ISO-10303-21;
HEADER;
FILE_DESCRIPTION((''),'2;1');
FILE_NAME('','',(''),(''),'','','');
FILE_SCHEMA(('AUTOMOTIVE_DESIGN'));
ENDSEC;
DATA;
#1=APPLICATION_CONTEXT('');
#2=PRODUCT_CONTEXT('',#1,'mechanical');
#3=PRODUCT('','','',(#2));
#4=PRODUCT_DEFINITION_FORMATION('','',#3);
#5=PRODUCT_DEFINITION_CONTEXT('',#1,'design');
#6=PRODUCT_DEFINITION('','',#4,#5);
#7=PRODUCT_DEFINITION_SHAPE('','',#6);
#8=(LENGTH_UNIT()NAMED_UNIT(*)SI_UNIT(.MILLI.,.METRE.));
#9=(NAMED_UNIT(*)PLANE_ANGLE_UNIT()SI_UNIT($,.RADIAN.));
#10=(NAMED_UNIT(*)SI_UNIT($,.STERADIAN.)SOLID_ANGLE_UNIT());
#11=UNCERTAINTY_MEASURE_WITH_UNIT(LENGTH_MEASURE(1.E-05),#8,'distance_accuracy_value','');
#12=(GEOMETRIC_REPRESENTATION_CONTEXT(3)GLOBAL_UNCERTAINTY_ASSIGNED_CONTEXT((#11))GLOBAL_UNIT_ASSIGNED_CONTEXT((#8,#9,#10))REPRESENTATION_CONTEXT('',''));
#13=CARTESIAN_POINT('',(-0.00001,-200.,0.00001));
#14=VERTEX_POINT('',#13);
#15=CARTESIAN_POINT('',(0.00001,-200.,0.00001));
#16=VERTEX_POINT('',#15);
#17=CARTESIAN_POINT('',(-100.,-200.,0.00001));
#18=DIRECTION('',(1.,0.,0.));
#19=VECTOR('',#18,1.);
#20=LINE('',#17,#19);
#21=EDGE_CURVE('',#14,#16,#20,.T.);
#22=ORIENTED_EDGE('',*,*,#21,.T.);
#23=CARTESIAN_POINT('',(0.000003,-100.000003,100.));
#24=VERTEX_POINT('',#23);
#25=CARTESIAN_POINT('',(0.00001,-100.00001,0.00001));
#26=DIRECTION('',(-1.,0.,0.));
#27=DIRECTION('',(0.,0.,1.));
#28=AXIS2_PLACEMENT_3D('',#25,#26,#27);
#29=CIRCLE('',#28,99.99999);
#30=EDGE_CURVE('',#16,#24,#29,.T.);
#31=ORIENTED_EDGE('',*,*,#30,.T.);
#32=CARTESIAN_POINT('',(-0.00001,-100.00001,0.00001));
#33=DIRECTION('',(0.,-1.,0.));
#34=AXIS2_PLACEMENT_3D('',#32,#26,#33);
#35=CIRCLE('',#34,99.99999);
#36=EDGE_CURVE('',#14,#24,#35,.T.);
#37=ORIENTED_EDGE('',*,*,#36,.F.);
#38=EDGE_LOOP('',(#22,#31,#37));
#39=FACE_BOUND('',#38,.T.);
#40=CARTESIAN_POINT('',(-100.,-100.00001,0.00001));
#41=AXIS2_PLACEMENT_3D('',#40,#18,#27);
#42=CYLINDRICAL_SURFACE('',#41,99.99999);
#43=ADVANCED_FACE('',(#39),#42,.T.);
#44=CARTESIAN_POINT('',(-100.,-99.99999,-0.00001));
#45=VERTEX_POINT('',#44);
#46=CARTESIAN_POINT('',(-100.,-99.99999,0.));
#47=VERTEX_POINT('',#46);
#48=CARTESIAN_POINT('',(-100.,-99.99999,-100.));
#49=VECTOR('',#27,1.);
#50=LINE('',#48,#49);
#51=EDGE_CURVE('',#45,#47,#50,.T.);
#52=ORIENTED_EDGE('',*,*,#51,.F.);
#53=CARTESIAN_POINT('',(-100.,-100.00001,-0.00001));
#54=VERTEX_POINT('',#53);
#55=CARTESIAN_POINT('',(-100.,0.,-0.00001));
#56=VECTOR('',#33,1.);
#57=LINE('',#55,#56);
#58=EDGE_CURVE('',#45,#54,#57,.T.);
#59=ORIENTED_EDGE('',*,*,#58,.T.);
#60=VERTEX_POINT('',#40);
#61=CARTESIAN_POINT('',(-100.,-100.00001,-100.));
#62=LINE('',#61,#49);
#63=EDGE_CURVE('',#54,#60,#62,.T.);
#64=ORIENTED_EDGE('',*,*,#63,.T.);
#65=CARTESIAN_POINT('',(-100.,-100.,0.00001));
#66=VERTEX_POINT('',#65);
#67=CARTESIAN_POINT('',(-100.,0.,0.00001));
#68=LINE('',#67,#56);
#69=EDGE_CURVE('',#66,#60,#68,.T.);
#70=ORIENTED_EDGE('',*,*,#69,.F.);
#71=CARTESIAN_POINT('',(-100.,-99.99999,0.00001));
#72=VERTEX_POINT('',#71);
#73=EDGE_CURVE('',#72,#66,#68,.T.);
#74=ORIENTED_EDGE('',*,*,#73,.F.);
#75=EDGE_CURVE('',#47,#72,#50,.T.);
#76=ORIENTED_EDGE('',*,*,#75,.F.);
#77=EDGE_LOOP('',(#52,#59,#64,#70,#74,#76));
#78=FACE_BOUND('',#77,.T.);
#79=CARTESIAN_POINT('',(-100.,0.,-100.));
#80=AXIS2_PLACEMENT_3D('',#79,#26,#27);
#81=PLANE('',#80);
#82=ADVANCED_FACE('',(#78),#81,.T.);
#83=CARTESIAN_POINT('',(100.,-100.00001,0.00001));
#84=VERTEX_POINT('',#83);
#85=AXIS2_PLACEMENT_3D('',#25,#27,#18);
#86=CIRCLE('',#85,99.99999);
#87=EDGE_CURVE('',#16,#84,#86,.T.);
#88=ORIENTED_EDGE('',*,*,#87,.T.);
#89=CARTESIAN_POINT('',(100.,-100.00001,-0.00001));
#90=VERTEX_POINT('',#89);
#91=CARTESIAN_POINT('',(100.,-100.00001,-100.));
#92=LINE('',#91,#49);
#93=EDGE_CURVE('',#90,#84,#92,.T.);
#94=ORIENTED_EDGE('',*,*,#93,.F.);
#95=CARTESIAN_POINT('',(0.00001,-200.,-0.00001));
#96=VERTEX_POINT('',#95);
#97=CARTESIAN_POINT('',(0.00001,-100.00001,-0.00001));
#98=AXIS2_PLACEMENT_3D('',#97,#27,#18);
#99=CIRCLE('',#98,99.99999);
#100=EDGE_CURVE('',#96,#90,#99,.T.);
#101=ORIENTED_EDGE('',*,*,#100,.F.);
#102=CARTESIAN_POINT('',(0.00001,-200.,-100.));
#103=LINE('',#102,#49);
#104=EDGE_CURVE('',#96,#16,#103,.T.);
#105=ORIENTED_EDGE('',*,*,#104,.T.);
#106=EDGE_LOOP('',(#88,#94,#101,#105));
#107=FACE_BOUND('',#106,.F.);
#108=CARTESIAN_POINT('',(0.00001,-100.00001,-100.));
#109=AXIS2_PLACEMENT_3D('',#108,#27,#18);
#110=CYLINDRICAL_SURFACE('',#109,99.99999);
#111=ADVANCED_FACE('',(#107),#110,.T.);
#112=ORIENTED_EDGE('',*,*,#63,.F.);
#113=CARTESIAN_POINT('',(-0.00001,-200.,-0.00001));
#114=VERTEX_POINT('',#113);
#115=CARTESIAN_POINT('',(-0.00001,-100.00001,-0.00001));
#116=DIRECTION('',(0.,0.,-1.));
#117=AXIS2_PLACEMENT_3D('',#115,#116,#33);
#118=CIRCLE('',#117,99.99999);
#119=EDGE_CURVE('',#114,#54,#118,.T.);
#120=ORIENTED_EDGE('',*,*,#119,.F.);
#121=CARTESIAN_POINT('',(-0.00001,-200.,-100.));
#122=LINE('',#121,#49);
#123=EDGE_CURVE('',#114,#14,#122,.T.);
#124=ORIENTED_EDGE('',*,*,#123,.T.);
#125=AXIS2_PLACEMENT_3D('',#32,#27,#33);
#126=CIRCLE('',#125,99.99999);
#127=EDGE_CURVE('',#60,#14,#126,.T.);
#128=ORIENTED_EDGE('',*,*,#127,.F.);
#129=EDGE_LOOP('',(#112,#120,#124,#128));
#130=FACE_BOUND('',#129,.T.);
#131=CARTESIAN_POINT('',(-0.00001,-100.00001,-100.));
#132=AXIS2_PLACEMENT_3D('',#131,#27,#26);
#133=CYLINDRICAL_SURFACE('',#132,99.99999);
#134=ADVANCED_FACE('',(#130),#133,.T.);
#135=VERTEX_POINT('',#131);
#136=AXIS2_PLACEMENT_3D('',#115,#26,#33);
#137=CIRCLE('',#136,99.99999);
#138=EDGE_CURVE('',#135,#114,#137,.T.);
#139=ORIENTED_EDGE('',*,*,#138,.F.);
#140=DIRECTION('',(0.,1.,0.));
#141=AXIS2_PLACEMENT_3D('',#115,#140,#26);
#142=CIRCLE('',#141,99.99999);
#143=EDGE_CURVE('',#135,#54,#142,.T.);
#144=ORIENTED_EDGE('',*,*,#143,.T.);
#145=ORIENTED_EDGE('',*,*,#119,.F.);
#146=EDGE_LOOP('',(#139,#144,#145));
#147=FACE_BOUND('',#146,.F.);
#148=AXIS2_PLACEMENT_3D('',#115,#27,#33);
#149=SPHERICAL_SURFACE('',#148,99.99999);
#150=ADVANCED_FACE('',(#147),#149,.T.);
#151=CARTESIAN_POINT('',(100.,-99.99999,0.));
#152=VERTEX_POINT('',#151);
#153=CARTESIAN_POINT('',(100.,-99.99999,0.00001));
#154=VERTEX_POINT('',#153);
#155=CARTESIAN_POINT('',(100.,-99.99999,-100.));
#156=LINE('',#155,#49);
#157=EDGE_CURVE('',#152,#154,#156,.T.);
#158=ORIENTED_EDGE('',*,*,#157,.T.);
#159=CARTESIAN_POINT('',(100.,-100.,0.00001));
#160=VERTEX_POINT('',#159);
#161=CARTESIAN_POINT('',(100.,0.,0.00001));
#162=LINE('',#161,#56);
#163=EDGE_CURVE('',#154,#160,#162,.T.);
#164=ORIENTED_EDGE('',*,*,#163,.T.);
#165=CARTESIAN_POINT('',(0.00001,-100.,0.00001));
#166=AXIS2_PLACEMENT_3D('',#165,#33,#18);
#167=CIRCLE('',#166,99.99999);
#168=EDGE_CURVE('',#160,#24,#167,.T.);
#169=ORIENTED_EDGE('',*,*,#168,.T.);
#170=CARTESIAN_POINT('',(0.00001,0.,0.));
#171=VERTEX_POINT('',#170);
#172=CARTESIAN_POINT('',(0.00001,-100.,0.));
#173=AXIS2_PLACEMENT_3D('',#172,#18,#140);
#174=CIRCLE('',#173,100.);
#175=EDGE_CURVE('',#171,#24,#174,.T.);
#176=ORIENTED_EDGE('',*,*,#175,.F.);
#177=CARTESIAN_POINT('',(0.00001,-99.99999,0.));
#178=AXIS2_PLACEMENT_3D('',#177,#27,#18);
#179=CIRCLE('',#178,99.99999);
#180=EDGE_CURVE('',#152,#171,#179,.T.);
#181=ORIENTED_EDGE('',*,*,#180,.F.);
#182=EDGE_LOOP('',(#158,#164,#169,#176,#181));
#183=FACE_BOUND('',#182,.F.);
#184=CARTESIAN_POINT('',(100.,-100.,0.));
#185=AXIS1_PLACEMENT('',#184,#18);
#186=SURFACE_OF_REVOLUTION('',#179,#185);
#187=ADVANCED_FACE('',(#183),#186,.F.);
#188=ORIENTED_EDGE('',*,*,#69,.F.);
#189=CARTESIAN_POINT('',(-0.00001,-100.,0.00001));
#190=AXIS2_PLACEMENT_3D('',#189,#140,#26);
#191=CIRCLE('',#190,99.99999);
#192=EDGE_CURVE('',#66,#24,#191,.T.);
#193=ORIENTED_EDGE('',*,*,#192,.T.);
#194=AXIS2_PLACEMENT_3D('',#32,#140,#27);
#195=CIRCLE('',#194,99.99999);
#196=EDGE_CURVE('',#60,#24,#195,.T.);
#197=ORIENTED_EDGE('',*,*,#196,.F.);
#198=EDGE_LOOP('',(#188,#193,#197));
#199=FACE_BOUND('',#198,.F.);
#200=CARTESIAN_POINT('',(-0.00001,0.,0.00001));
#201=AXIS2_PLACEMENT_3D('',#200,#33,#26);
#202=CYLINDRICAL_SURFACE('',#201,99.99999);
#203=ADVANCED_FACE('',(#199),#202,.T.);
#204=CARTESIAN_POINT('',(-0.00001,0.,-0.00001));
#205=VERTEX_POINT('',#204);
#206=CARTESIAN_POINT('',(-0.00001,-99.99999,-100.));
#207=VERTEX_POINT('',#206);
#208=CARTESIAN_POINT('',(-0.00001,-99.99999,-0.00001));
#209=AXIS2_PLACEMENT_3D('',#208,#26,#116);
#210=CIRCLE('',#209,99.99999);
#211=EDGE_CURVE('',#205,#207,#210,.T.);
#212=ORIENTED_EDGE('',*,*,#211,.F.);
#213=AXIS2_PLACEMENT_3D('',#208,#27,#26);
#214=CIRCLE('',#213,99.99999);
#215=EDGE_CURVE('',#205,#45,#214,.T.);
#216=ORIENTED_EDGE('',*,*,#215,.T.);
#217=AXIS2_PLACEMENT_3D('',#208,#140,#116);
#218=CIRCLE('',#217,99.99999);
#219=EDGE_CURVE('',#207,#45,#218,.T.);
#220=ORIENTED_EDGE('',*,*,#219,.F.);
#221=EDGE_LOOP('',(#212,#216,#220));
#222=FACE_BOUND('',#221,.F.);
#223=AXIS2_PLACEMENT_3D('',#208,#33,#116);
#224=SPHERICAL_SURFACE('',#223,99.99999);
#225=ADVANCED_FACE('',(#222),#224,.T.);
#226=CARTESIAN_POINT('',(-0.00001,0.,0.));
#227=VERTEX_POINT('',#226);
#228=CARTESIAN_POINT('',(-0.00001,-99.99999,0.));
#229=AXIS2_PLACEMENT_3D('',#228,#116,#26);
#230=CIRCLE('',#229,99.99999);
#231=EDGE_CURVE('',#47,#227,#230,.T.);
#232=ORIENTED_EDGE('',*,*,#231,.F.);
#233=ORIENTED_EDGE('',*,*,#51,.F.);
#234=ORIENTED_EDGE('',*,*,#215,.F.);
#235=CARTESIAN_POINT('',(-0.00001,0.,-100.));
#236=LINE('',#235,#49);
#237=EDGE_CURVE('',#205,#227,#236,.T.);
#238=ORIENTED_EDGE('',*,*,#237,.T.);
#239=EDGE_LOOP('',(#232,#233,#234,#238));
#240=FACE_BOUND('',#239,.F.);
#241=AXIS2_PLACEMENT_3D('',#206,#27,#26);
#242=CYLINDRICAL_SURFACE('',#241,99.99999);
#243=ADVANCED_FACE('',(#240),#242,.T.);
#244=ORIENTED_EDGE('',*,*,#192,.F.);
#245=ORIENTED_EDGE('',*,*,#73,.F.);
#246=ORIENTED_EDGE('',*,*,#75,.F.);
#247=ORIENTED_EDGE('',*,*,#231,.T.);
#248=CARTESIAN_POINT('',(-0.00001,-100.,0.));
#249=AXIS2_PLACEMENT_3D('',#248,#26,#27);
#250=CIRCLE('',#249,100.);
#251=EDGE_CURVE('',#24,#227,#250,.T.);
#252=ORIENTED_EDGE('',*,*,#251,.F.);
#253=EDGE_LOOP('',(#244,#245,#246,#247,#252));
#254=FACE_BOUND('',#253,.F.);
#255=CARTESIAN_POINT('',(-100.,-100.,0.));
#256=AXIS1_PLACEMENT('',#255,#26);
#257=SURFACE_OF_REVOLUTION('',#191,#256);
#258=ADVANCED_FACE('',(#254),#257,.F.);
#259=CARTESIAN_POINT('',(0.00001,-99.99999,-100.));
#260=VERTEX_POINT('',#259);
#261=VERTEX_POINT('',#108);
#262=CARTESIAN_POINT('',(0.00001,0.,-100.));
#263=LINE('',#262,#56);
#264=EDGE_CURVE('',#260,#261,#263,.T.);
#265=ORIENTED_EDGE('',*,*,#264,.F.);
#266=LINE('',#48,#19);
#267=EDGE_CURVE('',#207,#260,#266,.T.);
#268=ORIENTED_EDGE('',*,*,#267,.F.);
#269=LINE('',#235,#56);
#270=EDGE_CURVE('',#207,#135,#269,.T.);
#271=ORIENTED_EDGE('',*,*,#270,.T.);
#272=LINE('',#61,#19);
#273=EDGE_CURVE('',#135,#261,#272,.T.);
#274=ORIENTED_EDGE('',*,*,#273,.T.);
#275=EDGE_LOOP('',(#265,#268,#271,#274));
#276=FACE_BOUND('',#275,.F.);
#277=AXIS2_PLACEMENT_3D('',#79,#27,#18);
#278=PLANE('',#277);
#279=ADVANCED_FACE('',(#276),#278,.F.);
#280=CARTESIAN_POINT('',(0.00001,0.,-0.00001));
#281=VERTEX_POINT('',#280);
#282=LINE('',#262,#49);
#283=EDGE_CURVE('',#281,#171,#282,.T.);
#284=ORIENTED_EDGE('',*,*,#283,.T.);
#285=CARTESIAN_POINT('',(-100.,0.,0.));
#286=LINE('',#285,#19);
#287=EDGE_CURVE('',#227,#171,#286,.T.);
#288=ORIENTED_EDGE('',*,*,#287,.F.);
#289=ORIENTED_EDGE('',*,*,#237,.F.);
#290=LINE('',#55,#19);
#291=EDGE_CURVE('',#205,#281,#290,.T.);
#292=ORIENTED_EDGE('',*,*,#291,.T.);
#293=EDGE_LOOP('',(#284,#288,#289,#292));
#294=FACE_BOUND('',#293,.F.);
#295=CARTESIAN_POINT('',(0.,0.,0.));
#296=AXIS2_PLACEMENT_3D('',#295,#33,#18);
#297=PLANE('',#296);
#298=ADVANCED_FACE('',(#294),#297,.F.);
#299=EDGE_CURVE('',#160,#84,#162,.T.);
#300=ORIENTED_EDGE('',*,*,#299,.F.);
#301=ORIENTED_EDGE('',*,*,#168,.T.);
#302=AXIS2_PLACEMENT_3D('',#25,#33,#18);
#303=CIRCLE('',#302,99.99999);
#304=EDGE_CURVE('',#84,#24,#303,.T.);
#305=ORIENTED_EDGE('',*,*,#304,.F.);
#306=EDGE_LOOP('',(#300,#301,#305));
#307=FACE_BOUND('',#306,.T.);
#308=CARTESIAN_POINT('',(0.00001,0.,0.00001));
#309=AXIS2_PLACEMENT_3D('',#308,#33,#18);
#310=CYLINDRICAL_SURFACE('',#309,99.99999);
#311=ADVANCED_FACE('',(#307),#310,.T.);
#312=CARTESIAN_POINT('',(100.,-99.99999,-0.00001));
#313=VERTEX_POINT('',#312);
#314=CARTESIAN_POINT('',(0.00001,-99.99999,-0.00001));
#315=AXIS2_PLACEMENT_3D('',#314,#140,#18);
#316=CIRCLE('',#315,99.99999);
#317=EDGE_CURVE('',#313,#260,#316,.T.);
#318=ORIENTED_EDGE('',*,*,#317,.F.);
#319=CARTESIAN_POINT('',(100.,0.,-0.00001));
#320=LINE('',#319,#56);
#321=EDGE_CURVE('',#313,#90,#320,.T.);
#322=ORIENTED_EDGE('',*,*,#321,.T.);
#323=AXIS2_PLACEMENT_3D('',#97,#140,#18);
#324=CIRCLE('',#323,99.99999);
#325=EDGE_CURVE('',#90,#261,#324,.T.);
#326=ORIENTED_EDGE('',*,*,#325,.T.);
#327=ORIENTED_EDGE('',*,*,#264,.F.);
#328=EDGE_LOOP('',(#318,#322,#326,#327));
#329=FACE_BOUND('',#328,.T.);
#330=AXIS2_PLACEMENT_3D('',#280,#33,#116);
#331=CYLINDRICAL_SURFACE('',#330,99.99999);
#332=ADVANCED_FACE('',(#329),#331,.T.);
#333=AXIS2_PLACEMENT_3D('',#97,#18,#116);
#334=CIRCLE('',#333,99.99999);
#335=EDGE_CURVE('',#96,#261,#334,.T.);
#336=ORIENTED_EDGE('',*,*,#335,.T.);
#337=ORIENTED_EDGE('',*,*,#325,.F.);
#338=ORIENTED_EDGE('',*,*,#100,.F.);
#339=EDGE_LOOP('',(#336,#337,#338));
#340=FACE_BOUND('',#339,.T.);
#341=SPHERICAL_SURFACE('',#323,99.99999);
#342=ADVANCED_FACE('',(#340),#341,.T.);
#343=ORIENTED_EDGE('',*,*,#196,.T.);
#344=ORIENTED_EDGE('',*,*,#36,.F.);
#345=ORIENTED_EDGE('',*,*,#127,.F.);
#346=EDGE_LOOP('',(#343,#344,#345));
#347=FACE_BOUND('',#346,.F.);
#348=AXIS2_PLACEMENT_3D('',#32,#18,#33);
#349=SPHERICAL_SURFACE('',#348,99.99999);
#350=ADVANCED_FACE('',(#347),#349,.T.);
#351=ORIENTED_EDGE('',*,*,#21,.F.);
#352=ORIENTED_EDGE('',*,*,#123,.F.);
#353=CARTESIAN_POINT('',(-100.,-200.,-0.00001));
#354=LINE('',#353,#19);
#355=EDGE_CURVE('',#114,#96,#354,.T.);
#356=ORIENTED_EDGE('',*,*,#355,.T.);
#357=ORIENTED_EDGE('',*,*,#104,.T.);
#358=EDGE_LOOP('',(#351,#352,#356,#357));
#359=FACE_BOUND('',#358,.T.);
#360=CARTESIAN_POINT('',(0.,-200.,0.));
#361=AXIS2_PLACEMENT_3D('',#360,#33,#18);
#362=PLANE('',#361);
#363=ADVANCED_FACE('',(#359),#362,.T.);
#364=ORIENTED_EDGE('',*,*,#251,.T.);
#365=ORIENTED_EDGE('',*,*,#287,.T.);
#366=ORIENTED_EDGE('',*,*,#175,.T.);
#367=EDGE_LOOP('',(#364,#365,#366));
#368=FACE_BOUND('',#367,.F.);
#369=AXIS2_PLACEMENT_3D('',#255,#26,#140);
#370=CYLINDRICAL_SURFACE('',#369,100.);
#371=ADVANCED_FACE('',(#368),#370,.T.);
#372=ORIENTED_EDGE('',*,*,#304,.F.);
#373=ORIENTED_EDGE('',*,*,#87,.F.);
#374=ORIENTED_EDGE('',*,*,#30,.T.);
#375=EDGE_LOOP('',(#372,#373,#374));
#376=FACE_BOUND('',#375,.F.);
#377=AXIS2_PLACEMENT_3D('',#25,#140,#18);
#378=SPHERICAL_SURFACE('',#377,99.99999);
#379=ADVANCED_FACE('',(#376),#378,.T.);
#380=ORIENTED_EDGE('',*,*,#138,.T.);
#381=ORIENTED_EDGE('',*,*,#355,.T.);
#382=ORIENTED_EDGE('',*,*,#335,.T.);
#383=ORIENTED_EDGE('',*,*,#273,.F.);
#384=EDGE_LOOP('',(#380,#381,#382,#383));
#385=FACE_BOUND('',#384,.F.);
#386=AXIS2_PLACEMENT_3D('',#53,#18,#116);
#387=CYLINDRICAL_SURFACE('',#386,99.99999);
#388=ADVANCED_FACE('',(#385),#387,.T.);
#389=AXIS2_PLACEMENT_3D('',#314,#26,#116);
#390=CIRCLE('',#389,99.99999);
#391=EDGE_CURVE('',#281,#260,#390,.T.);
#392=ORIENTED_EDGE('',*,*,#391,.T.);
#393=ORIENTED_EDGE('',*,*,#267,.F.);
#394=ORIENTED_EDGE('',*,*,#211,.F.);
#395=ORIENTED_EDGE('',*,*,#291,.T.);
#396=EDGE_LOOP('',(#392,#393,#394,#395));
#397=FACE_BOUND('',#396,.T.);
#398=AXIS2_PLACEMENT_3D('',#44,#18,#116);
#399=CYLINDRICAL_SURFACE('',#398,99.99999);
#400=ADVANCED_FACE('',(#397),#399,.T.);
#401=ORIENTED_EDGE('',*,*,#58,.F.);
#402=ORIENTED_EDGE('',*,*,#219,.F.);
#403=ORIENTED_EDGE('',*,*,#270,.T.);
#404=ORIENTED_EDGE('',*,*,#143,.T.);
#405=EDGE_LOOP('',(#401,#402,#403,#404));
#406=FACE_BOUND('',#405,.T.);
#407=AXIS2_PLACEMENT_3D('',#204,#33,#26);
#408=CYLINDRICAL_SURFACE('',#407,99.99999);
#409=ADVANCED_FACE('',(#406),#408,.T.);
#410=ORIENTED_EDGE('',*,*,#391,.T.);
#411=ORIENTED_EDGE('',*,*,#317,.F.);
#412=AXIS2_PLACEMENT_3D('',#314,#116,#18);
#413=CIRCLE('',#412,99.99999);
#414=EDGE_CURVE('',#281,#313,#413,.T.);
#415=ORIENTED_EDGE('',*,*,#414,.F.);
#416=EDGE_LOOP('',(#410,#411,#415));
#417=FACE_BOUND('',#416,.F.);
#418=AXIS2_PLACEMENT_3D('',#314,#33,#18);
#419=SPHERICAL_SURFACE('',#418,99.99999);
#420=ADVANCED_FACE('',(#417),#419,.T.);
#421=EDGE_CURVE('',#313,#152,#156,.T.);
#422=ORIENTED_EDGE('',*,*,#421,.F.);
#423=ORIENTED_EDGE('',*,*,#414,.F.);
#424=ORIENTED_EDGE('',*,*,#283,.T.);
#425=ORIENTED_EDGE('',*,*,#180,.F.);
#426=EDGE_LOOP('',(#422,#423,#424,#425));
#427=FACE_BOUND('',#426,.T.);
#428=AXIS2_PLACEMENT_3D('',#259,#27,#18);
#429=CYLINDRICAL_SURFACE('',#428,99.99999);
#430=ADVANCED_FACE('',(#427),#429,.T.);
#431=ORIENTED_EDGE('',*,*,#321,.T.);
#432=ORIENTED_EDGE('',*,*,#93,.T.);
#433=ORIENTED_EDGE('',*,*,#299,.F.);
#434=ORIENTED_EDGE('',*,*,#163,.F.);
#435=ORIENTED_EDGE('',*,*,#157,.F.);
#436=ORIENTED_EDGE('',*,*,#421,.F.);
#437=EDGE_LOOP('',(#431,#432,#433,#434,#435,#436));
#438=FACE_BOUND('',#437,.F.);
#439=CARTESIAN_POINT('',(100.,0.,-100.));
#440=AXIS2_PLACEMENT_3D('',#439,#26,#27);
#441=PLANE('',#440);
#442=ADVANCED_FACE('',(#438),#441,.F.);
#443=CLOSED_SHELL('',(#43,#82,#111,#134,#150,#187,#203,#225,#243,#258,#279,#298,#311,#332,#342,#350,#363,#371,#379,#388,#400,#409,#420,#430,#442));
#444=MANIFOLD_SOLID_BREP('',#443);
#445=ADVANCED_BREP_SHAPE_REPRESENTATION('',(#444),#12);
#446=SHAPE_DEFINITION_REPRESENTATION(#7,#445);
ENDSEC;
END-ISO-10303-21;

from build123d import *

# Parameters (mm, degrees)
F0_W        = 200
F0_H        = 200
F1_DEPTH    = 200
F2_R        = 99.99999
F3_T1_DEPTH = 200
F3_T4_ANGLE = 90
F3_T6_ANGLE = 90


# Not quite as in the source:
# - a fillet or chamfer that OpenCascade refuses, or shapes differently, is made with other operations: its cross-section is extruded or revolved along the edge and cut away or added
# - a fillet or chamfer is up to 0.001 mm smaller than in the source, because OpenCascade refuses the exact size


with BuildPart() as f1:
    # F0 (on Front) → F1 (new body)
    with BuildSketch(Plane.XZ):
        Rectangle(F0_W, F0_H)
    extrude(amount=F1_DEPTH)

    # F2 (radius 100 in the source; OpenCascade refuses exactly that, so slightly less here)
    f2_edges = [f1.edges().sort_by_distance(p)[0] for p in [
        (100, -100, -100),
        (100, -100, 100),
        (100, 0, 0),
        (100, -200, 0),
        (0, -200, 100),
        (-100, -200, 0),
        (0, -200, -100),
        (-100, -100, -100),
        (0, 0, -100),
        (-100, -100, 100),
        (-100, 0, 0),
    ]]
    fillet(f2_edges, radius=F2_R)

    # F3: fillet of radius 100 on 1 edges, made by hand

    # F3_s2 → F3_t1 (cut)
    with BuildSketch(Plane.YZ.offset(-100)):
        with BuildLine():
            ThreePointArc((0, 0), (-29.2893218813, 70.7106781187), (-100, 100))
            Line((-100, 100), (0, 100))
            Line((0, 100), (0, 0))
        make_face()
    extrude(amount=F3_T1_DEPTH, mode=Mode.SUBTRACT)

    # F3_s3 → F3_t4 (revolve, cut)
    with BuildSketch(Plane.XY):
        with BuildLine():
            ThreePointArc((100, -99.99999), (70.7106810476, -29.2893189524), (1e-05, 0))
            Line((1e-05, 0), (100, 0))
            Line((100, 0), (100, -99.99999))
        make_face()
    revolve(axis=Axis((100, -100, 0), (1, 0, 0)), revolution_arc=F3_T4_ANGLE, mode=Mode.SUBTRACT)

    # F3_s5 → F3_t6 (revolve, cut)
    with BuildSketch(Plane.XZ.offset(100)):
        with BuildLine():
            ThreePointArc((-100, 1e-05), (-70.7106810476, 70.7106810476), (-1e-05, 100))
            Line((-1e-05, 100), (-100, 100))
            Line((-100, 100), (-100, 1e-05))
        make_face()
    revolve(axis=Axis((-100, -100, 0), (-1, 0, 0)), revolution_arc=F3_T6_ANGLE, mode=Mode.SUBTRACT)


solid = f1.part
